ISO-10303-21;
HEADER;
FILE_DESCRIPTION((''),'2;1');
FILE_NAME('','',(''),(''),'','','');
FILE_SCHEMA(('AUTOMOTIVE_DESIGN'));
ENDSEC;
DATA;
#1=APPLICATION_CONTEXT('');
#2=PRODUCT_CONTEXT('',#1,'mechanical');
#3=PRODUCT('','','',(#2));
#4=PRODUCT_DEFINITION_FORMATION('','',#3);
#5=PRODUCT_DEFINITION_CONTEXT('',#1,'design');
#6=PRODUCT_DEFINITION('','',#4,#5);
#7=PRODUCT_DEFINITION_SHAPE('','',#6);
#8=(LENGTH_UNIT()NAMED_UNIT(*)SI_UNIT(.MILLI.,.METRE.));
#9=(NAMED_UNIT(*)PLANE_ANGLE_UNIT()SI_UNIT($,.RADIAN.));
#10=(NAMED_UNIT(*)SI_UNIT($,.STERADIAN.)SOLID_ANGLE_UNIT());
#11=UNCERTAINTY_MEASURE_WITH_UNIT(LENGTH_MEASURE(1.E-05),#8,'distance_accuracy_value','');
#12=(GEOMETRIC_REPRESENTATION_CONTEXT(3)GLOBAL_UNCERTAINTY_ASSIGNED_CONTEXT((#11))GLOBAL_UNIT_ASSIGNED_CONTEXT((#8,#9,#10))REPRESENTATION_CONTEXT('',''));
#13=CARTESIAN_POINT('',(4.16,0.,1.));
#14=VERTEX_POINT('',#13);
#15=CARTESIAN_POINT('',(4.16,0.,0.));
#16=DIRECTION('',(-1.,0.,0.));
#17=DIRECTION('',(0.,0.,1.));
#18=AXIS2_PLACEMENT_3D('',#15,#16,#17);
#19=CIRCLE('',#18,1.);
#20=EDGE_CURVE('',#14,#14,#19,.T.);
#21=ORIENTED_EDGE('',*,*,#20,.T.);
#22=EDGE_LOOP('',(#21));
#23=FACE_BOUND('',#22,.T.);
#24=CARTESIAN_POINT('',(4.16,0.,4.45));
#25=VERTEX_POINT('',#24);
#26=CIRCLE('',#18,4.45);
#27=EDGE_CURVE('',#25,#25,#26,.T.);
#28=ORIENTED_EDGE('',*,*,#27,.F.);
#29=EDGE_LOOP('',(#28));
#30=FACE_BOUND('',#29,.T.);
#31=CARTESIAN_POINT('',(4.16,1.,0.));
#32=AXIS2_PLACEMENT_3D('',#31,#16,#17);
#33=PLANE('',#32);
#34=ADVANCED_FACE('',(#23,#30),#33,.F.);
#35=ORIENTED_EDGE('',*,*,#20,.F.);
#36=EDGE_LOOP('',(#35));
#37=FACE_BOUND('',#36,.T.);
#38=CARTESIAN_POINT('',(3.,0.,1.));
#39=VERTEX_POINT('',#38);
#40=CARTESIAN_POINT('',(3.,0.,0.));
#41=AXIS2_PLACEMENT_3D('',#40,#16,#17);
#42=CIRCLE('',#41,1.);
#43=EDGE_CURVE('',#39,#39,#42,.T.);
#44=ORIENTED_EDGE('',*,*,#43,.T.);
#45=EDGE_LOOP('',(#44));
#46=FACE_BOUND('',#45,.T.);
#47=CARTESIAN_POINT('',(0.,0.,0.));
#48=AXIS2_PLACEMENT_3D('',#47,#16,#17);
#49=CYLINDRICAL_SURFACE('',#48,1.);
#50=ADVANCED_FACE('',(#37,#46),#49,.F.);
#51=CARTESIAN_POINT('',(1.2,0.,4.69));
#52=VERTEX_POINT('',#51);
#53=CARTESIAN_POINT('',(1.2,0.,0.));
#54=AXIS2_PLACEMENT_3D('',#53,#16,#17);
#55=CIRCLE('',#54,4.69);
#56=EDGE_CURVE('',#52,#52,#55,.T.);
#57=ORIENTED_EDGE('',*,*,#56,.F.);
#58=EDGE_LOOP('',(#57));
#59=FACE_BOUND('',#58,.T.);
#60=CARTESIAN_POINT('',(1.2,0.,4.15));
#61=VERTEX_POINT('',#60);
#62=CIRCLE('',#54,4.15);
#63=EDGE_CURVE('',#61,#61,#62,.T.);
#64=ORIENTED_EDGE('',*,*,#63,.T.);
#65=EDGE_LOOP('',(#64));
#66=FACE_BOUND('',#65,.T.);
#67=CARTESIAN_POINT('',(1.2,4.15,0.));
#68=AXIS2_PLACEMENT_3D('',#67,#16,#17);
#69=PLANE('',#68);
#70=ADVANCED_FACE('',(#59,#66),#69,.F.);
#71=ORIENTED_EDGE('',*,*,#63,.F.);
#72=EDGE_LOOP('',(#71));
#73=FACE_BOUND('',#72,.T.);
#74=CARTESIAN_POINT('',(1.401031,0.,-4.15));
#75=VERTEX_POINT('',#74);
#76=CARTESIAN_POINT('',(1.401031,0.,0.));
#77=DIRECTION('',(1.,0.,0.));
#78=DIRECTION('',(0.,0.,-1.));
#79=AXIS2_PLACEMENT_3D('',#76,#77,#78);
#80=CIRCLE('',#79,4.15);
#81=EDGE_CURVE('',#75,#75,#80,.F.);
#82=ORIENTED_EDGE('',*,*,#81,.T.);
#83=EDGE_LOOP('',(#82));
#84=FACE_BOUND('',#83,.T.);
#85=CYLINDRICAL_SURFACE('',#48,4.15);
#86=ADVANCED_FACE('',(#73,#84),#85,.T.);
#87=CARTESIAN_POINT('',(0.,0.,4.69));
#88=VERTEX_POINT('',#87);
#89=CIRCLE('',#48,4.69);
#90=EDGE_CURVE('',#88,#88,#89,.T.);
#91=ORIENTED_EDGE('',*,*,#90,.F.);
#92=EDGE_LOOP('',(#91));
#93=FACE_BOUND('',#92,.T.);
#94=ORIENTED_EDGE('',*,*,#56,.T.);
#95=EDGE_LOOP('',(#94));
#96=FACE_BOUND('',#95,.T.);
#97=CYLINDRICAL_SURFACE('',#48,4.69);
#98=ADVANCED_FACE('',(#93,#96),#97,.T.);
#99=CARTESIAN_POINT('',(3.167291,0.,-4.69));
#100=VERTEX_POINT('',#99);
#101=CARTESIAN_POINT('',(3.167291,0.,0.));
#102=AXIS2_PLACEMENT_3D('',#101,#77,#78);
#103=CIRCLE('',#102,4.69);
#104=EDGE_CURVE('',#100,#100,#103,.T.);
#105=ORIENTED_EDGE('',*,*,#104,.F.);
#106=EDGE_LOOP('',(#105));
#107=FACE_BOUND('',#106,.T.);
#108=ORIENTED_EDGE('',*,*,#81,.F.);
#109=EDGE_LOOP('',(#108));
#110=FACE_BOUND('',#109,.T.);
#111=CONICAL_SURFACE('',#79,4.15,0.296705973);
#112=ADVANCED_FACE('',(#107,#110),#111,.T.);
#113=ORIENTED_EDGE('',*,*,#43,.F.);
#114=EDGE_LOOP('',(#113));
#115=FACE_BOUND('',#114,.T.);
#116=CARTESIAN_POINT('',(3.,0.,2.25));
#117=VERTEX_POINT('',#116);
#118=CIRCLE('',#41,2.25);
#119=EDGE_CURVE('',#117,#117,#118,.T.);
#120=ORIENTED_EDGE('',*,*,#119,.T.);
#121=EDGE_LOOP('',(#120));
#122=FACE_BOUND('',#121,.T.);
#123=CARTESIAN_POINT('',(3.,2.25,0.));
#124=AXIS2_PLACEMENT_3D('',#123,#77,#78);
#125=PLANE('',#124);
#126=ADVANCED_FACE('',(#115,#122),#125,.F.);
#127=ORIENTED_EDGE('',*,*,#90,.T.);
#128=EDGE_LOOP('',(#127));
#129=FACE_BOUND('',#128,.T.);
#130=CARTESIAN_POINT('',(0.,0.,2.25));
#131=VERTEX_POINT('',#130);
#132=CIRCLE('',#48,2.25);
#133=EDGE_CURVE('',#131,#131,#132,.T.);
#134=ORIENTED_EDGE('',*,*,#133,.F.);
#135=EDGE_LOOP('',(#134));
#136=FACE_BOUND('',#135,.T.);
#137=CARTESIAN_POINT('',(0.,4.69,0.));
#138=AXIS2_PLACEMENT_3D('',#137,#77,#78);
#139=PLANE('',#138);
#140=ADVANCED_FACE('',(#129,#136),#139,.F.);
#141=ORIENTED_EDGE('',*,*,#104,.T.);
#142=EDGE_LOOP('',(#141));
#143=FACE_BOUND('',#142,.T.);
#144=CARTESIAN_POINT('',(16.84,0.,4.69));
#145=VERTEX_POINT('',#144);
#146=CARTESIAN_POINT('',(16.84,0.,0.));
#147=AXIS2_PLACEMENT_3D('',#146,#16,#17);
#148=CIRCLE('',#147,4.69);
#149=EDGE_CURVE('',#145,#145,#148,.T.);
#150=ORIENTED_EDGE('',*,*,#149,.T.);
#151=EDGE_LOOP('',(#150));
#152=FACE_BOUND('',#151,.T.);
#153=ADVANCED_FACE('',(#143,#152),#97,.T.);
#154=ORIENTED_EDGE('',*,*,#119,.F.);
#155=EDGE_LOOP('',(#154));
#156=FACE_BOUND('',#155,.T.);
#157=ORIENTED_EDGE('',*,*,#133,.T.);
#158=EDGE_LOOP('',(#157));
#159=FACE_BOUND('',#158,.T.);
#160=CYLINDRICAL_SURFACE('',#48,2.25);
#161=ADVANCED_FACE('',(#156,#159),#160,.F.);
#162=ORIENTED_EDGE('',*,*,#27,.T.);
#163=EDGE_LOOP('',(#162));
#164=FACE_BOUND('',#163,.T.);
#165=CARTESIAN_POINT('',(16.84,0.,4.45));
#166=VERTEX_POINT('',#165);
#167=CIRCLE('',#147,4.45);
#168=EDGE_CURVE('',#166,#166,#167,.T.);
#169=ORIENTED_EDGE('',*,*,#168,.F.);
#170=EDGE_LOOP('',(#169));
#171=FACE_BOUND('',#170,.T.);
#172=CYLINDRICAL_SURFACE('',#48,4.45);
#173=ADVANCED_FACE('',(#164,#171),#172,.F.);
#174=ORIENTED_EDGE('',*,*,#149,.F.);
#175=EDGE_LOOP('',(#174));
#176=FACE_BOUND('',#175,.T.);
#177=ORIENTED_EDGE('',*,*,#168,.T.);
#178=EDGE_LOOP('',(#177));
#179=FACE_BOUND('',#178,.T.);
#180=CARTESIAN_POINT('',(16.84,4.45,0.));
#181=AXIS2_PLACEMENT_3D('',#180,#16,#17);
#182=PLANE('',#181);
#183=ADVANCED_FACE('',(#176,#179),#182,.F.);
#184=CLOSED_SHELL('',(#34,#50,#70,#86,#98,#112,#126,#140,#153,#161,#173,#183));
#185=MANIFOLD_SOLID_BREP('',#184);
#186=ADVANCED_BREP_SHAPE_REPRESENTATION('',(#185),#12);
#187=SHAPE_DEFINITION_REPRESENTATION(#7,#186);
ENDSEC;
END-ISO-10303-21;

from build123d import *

# Parameters (mm, degrees)
CHANFRO4_SIZE   = 0.55
CHANFRO4_SIZE_2 = 1.79896894


with BuildPart() as part:
    # Esboço1 → Revolução1 (revolve)
    with BuildSketch(Plane.XY, mode=Mode.PRIVATE) as revolu_o1_sk:
        Polygon((4.16, 1), (4.16, 4.45), (16.84, 4.45), (16.84, 4.69), (3.2, 4.69), (3.2, 4.15), (1.2, 4.15), (1.2, 4.69), (0, 4.69), (0, 2.25), (3, 2.25), (3, 1), align=None)
    revolve(revolu_o1_sk.sketch.rotate(Axis((0, 0, 0), (1, 0, 0)), 90), axis=Axis((0, 0, 0), (1, 0, 0)))

    # Chanfro4
    # the kernel refuses this chamfer: 1.79896894, 0.55 mm, written as the material it adds along each edge
    with BuildSketch(Plane(origin=(3.2, 0, 0), x_dir=(0, 0, 1), z_dir=(0, 1, 0))) as chanfro4_piece_1_section:
        Polygon((4.15 + CHANFRO4_SIZE, 0), (4.15, -CHANFRO4_SIZE_2), (4.15, 0), align=None)
    chanfro4_piece_1 = revolve(axis=Axis((3.2, 0, 0), (1, 0, 0)), mode=Mode.PRIVATE)
    chanfro4_piece_1 = chanfro4_piece_1 & Plane(origin=(2.25712916, 0, 0), x_dir=(0, 0, 1), z_dir=(-1, 0, 0)) * Cylinder(4.69, 19, mode=Mode.PRIVATE)
    add(chanfro4_piece_1)


solid = part.part
